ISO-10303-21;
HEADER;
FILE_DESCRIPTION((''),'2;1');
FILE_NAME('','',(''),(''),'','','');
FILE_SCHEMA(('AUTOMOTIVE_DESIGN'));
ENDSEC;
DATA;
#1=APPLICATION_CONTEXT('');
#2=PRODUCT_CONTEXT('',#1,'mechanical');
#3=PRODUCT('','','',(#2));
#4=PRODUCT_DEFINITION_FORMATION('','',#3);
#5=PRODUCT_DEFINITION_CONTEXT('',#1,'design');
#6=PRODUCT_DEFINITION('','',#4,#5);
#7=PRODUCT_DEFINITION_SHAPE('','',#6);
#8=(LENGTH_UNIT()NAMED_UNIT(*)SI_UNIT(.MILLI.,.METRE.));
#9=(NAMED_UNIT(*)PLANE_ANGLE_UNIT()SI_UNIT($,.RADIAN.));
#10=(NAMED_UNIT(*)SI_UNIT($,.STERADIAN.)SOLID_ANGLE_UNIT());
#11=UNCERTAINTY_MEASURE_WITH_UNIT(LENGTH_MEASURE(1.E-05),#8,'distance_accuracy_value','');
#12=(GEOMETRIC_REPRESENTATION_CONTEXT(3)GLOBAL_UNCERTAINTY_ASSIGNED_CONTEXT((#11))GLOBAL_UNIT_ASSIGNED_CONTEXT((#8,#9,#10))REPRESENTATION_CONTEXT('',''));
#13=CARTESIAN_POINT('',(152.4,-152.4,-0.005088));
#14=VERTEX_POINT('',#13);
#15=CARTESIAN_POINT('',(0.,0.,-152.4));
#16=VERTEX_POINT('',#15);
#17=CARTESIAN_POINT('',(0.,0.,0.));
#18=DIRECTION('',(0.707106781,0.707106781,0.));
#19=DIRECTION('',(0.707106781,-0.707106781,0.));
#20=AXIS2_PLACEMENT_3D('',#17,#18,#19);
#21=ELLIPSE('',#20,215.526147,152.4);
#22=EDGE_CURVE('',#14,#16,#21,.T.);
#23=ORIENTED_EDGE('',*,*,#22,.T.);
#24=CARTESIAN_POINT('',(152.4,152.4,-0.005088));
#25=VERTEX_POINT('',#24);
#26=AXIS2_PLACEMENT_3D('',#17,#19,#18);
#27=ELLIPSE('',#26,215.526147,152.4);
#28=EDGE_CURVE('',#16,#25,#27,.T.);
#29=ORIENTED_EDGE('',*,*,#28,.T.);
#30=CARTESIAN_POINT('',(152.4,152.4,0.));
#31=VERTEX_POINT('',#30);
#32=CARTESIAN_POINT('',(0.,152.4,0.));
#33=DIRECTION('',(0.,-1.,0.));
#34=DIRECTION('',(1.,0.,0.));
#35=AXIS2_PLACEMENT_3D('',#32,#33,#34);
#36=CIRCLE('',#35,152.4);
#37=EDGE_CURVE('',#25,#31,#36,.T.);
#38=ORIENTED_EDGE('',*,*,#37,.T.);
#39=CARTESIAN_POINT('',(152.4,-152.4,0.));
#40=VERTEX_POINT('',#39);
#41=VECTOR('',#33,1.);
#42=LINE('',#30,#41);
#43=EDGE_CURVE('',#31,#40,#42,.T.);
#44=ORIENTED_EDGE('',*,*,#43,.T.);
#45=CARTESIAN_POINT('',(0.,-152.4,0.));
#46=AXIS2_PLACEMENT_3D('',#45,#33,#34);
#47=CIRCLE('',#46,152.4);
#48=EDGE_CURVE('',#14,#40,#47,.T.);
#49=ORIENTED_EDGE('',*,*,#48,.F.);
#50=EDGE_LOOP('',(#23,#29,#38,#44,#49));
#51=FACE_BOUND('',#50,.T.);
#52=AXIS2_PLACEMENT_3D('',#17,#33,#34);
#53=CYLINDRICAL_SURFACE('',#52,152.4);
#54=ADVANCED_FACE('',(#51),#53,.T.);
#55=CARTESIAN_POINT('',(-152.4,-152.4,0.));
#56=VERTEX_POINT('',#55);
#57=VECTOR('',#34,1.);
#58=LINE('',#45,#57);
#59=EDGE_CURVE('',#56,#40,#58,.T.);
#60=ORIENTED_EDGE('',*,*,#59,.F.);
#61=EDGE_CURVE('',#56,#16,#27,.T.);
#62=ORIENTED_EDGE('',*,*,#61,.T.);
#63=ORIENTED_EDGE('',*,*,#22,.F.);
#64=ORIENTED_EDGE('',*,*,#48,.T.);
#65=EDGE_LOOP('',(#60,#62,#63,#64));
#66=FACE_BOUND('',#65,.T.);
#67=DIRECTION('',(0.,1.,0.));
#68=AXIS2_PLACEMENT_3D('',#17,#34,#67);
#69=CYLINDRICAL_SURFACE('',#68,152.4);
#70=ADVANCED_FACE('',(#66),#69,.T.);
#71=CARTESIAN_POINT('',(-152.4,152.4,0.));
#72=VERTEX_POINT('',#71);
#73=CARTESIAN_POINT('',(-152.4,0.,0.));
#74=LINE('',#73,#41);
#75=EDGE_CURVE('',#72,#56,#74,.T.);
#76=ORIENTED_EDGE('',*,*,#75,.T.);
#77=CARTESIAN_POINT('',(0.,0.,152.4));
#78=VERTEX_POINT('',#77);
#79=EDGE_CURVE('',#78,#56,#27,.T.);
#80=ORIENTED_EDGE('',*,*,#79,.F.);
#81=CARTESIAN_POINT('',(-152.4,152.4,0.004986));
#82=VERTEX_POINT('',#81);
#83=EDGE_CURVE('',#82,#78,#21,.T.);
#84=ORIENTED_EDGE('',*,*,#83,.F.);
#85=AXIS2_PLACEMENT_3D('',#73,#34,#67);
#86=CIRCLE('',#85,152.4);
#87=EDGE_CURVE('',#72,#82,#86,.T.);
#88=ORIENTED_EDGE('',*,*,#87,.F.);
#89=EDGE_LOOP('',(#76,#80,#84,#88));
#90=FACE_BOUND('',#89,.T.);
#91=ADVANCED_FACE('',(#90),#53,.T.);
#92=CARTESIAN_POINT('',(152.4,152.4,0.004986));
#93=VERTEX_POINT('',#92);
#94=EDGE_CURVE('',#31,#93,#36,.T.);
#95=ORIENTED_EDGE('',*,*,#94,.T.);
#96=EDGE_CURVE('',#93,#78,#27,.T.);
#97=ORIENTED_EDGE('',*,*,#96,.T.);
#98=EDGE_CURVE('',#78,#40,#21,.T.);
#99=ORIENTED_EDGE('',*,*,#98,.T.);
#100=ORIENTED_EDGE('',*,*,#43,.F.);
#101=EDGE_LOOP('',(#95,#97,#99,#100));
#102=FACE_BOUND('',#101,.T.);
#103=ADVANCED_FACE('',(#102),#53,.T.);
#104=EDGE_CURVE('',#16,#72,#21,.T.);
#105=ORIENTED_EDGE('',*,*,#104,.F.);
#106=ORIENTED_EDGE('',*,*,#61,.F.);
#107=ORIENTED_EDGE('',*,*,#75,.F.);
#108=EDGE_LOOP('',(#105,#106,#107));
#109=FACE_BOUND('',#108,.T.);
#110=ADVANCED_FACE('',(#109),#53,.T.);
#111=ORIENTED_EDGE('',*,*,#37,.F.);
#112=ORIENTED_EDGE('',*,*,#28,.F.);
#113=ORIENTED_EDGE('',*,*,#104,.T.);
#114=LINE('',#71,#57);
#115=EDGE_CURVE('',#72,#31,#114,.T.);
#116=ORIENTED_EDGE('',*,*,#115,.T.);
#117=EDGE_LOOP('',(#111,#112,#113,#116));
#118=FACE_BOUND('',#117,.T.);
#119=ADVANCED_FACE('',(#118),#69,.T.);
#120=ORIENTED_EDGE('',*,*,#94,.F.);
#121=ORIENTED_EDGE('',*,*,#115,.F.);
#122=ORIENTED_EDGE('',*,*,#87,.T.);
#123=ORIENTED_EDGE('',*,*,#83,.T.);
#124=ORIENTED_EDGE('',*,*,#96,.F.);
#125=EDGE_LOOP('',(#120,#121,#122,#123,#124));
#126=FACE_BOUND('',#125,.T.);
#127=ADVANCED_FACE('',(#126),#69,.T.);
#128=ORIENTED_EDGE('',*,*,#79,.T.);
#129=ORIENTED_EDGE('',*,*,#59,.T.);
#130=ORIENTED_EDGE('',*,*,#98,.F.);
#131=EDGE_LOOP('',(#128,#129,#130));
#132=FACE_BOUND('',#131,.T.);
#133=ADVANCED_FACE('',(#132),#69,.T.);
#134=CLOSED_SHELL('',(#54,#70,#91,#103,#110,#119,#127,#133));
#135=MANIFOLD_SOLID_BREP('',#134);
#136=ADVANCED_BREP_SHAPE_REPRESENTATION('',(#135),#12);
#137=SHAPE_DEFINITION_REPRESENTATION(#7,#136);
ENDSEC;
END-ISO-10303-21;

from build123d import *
from build123d import SkipClean  # not in build123d's __all__

# Parameters (mm, degrees)
F0_W     = 304.8
F0_H     = 304.8
F1_DEPTH = 152.4
F2_R     = 152.4
F4_DEPTH = 152.4
F3_R     = 152.4
F5_DEPTH = 152.4


with BuildPart() as f1:
    # F0 (on Top) → F1 (new body, symmetric)
    with BuildSketch(Plane.XY):
        Rectangle(F0_W, F0_H)
    extrude(amount=F1_DEPTH, both=True)

    # F2 (on Right) → F4 (intersect, symmetric)
    with BuildSketch(Plane.YZ):
        Circle(F2_R)
    extrude(amount=F4_DEPTH, both=True, mode=Mode.INTERSECT)

    # F3 (on Front) → F5 (intersect, symmetric)
    with BuildSketch(Plane.XZ):
        Circle(F3_R)
    with SkipClean():  # cleaning this boolean's faces spoils the solid; the shape is the same uncleaned
        extrude(amount=F5_DEPTH, both=True, mode=Mode.INTERSECT)


solid = f1.part
